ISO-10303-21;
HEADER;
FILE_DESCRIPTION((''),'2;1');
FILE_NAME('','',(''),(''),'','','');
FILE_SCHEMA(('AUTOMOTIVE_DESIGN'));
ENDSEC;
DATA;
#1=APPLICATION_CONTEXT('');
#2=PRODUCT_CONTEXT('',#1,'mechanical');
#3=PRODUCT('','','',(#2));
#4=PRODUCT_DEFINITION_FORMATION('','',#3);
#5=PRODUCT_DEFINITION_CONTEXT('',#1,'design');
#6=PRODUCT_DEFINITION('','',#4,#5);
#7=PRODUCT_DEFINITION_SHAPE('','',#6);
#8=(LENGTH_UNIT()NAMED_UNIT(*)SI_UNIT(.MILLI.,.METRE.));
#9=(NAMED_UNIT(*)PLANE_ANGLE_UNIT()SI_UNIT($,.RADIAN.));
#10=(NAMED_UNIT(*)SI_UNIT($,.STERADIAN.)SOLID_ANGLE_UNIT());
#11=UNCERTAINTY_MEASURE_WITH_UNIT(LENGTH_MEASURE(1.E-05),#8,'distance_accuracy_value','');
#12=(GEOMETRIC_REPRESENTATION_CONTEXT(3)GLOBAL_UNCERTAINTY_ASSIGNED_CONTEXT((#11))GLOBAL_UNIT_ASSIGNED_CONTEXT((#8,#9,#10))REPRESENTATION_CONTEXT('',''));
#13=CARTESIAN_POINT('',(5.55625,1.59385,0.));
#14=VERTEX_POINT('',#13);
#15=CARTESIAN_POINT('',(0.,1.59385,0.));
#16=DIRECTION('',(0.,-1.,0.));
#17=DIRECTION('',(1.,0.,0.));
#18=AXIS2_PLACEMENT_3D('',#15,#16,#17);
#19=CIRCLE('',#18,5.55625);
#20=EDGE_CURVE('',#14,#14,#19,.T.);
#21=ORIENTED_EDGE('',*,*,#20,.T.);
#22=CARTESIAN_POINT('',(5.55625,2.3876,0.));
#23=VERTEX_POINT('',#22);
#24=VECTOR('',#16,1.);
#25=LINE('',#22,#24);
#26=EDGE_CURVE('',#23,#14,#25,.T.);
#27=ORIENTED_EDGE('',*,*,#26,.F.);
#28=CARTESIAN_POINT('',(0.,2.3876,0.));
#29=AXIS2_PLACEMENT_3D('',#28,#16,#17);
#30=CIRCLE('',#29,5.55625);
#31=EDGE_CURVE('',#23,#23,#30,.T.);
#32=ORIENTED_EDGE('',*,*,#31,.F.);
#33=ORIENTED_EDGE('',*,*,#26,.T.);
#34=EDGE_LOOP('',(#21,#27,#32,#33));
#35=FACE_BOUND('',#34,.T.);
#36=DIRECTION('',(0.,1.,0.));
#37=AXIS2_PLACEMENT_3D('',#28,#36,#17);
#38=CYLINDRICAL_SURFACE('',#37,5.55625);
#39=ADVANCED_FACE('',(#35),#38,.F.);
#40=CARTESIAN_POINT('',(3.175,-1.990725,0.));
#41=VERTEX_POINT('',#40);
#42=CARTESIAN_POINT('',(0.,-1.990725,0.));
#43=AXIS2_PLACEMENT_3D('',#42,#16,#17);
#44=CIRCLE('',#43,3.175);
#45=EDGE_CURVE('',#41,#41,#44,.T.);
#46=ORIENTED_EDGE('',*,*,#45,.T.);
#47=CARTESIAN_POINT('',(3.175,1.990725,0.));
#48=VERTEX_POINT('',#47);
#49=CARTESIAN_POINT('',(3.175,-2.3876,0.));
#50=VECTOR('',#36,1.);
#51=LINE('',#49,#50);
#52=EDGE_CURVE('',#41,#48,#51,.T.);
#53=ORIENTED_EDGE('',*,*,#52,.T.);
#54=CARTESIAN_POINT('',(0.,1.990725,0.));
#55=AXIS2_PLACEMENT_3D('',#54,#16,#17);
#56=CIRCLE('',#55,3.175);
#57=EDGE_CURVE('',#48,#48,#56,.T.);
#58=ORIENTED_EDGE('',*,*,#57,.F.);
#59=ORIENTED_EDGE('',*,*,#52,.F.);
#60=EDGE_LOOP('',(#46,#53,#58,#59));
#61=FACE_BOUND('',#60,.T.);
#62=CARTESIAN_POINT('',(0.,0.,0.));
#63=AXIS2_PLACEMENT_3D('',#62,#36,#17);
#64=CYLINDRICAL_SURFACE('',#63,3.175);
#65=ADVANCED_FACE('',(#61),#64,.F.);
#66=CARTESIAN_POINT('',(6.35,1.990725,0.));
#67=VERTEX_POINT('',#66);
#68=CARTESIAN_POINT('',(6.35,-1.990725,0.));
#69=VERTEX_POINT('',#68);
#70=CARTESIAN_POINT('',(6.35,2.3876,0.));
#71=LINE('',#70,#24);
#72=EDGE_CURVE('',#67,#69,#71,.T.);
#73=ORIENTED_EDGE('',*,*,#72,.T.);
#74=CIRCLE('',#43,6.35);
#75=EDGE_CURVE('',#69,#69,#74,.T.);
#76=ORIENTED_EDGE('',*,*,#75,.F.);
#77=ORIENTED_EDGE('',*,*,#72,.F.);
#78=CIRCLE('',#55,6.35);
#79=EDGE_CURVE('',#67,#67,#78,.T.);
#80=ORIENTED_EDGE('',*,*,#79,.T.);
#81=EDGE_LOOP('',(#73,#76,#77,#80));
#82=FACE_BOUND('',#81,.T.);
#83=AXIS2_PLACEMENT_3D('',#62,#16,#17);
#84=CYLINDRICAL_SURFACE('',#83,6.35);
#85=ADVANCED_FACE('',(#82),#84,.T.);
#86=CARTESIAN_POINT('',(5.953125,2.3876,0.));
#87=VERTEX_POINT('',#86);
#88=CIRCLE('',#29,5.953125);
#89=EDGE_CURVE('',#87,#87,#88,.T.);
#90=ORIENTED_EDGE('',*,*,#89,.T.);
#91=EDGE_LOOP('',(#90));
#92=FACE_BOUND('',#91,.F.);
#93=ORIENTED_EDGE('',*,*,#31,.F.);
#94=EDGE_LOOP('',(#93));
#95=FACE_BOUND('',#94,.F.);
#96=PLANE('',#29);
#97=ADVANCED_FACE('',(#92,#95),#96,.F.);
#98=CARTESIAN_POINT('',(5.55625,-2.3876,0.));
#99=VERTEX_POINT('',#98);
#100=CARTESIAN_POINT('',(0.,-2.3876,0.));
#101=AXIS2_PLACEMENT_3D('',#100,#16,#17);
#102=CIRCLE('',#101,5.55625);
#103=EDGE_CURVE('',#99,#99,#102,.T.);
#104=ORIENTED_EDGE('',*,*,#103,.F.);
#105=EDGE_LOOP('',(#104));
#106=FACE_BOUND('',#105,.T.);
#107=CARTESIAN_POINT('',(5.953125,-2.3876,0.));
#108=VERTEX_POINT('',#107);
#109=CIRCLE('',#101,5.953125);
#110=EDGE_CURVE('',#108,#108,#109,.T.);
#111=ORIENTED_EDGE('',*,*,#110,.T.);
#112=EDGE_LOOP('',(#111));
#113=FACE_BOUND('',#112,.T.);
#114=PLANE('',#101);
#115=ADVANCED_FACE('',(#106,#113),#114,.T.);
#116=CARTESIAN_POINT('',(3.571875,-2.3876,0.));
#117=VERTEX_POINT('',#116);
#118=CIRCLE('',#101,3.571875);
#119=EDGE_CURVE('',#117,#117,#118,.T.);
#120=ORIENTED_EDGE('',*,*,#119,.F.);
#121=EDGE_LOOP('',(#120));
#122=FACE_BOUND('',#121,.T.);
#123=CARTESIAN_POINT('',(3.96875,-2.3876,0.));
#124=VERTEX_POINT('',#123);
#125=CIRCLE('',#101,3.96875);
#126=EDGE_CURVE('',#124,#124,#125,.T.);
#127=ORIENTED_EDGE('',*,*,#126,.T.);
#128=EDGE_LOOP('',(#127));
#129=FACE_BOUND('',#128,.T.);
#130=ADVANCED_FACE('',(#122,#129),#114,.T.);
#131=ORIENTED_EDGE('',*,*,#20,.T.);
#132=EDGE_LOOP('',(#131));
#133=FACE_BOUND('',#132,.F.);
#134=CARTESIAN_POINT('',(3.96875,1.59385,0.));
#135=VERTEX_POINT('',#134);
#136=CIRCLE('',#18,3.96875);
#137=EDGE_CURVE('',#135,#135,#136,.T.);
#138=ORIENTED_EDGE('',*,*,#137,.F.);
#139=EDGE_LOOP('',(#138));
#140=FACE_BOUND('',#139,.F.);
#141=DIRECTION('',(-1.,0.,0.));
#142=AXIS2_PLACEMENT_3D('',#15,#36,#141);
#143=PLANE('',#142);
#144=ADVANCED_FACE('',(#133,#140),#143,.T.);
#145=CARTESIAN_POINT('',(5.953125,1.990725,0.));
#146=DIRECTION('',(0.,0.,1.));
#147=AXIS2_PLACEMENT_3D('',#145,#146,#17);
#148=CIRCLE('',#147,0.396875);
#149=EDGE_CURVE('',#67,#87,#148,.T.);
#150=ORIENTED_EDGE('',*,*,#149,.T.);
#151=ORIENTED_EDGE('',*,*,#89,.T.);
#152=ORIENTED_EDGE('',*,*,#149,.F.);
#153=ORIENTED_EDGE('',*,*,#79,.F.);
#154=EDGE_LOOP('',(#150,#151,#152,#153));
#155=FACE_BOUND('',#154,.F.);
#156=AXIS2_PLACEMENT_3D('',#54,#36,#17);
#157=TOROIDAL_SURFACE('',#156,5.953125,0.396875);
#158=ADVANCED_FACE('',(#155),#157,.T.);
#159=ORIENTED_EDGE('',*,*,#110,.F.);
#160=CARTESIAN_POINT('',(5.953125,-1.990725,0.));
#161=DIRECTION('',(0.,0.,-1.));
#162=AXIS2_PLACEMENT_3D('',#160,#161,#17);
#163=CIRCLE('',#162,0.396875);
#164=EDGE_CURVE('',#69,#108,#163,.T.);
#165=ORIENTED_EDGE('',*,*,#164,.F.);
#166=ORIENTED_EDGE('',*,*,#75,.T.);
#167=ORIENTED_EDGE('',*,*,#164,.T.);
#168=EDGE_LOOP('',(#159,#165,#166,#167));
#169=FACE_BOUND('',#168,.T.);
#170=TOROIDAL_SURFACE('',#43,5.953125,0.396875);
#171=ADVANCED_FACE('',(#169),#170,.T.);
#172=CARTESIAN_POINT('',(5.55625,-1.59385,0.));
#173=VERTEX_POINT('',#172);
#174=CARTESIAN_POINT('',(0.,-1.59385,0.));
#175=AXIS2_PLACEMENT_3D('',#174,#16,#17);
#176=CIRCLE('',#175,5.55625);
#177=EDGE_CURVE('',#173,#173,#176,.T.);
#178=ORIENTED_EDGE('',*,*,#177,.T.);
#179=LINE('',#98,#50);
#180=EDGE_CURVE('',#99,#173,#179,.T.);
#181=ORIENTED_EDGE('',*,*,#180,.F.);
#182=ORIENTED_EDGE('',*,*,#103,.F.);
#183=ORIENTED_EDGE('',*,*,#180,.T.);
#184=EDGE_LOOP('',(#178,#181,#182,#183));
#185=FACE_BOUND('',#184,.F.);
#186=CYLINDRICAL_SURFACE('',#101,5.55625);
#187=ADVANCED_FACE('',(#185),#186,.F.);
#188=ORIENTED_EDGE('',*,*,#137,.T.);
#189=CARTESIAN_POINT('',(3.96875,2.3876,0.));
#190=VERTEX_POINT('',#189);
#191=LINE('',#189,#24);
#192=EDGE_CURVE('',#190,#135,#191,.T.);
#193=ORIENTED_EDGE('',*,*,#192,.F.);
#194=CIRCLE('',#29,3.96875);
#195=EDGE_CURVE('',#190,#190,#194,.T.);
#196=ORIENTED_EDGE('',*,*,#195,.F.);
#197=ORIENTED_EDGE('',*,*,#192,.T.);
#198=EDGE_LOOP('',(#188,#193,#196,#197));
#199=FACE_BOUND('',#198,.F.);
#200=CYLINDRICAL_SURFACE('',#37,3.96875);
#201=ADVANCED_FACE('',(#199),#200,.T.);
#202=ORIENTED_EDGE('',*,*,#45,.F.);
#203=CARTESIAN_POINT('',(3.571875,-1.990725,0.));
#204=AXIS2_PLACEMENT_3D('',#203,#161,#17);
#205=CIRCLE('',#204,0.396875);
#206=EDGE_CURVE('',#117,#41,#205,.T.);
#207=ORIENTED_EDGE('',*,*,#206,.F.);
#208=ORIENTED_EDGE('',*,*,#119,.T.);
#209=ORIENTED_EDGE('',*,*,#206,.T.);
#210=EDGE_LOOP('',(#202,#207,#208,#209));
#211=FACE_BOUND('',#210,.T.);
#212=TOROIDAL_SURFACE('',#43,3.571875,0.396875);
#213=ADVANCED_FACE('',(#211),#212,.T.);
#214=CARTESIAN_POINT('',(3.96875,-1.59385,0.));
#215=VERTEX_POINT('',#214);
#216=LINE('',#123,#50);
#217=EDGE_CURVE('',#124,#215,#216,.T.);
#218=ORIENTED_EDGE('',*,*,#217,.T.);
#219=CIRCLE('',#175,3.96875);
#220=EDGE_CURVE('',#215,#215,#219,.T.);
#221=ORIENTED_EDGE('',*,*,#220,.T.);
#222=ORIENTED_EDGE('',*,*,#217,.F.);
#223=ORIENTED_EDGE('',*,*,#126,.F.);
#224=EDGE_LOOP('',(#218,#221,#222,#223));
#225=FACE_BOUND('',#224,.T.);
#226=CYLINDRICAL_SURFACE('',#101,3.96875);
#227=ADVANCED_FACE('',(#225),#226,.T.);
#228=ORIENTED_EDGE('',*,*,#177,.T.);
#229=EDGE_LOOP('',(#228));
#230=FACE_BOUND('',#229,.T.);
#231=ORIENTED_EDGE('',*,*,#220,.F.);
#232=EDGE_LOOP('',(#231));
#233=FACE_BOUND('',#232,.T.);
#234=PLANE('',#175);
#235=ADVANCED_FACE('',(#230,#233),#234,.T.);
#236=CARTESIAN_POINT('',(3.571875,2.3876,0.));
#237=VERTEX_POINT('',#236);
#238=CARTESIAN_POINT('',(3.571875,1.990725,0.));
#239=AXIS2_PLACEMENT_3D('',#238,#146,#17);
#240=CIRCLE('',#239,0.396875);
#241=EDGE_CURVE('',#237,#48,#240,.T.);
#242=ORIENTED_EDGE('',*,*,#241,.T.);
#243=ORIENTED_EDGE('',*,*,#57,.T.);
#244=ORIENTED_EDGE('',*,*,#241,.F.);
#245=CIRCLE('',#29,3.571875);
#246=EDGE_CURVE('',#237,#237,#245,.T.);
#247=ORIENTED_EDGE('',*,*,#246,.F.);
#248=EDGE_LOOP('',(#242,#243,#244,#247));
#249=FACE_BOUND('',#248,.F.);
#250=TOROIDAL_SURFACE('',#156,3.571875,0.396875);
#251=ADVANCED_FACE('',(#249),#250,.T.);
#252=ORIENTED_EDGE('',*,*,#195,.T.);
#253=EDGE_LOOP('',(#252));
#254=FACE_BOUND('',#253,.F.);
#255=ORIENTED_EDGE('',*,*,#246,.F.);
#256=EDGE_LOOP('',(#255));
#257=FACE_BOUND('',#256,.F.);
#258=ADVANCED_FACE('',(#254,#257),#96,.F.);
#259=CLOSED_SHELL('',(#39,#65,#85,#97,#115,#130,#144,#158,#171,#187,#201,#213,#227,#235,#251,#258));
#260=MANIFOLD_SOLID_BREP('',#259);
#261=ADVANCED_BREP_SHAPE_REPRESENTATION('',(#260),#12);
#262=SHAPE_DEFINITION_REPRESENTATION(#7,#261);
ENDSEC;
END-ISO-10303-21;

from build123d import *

# Parameters (mm, degrees)
F0_R     = 6.35
F0_R_2   = 3.175
F1_DEPTH = 2.3876
F2_R     = 5.55625
F2_R_2   = 3.96875
F3_DEPTH = 0.79375
F4_R     = 0.396875


# Not quite as in the source:
# - a pattern or mirror of a feature is missing from the dataset's text; its kind, count and spacing are read off the source's solid


with BuildPart() as f1:
    # F0 (on Front) → F1 (new body, symmetric)
    with BuildSketch(Plane.XZ):
        Circle(F0_R)
        Circle(F0_R_2, mode=Mode.SUBTRACT)
    extrude(amount=F1_DEPTH, both=True)

    # F2 (on face) → F3 (cut)
    with BuildSketch(Plane.XZ.offset(2.3876)):
        Circle(F2_R)
        Circle(F2_R_2, mode=Mode.SUBTRACT)
    f3 = extrude(amount=-F3_DEPTH, mode=Mode.SUBTRACT)

    # F3_copies: F3 across plane
    add(f3.mirror(Plane.ZX), mode=Mode.SUBTRACT)

    # F4
    f4_edges = [f1.edges().sort_by_distance(p)[0] for p in [
        (-3.175, -2.3876, 0),
        (3.175, 0, 0),
        (-3.175, 2.3876, 0),
        (-6.35, 2.3876, 0),
        (6.35, 0, 0),
        (-6.35, -2.3876, 0),
    ]]
    fillet(f4_edges, radius=F4_R)


solid = f1.part
